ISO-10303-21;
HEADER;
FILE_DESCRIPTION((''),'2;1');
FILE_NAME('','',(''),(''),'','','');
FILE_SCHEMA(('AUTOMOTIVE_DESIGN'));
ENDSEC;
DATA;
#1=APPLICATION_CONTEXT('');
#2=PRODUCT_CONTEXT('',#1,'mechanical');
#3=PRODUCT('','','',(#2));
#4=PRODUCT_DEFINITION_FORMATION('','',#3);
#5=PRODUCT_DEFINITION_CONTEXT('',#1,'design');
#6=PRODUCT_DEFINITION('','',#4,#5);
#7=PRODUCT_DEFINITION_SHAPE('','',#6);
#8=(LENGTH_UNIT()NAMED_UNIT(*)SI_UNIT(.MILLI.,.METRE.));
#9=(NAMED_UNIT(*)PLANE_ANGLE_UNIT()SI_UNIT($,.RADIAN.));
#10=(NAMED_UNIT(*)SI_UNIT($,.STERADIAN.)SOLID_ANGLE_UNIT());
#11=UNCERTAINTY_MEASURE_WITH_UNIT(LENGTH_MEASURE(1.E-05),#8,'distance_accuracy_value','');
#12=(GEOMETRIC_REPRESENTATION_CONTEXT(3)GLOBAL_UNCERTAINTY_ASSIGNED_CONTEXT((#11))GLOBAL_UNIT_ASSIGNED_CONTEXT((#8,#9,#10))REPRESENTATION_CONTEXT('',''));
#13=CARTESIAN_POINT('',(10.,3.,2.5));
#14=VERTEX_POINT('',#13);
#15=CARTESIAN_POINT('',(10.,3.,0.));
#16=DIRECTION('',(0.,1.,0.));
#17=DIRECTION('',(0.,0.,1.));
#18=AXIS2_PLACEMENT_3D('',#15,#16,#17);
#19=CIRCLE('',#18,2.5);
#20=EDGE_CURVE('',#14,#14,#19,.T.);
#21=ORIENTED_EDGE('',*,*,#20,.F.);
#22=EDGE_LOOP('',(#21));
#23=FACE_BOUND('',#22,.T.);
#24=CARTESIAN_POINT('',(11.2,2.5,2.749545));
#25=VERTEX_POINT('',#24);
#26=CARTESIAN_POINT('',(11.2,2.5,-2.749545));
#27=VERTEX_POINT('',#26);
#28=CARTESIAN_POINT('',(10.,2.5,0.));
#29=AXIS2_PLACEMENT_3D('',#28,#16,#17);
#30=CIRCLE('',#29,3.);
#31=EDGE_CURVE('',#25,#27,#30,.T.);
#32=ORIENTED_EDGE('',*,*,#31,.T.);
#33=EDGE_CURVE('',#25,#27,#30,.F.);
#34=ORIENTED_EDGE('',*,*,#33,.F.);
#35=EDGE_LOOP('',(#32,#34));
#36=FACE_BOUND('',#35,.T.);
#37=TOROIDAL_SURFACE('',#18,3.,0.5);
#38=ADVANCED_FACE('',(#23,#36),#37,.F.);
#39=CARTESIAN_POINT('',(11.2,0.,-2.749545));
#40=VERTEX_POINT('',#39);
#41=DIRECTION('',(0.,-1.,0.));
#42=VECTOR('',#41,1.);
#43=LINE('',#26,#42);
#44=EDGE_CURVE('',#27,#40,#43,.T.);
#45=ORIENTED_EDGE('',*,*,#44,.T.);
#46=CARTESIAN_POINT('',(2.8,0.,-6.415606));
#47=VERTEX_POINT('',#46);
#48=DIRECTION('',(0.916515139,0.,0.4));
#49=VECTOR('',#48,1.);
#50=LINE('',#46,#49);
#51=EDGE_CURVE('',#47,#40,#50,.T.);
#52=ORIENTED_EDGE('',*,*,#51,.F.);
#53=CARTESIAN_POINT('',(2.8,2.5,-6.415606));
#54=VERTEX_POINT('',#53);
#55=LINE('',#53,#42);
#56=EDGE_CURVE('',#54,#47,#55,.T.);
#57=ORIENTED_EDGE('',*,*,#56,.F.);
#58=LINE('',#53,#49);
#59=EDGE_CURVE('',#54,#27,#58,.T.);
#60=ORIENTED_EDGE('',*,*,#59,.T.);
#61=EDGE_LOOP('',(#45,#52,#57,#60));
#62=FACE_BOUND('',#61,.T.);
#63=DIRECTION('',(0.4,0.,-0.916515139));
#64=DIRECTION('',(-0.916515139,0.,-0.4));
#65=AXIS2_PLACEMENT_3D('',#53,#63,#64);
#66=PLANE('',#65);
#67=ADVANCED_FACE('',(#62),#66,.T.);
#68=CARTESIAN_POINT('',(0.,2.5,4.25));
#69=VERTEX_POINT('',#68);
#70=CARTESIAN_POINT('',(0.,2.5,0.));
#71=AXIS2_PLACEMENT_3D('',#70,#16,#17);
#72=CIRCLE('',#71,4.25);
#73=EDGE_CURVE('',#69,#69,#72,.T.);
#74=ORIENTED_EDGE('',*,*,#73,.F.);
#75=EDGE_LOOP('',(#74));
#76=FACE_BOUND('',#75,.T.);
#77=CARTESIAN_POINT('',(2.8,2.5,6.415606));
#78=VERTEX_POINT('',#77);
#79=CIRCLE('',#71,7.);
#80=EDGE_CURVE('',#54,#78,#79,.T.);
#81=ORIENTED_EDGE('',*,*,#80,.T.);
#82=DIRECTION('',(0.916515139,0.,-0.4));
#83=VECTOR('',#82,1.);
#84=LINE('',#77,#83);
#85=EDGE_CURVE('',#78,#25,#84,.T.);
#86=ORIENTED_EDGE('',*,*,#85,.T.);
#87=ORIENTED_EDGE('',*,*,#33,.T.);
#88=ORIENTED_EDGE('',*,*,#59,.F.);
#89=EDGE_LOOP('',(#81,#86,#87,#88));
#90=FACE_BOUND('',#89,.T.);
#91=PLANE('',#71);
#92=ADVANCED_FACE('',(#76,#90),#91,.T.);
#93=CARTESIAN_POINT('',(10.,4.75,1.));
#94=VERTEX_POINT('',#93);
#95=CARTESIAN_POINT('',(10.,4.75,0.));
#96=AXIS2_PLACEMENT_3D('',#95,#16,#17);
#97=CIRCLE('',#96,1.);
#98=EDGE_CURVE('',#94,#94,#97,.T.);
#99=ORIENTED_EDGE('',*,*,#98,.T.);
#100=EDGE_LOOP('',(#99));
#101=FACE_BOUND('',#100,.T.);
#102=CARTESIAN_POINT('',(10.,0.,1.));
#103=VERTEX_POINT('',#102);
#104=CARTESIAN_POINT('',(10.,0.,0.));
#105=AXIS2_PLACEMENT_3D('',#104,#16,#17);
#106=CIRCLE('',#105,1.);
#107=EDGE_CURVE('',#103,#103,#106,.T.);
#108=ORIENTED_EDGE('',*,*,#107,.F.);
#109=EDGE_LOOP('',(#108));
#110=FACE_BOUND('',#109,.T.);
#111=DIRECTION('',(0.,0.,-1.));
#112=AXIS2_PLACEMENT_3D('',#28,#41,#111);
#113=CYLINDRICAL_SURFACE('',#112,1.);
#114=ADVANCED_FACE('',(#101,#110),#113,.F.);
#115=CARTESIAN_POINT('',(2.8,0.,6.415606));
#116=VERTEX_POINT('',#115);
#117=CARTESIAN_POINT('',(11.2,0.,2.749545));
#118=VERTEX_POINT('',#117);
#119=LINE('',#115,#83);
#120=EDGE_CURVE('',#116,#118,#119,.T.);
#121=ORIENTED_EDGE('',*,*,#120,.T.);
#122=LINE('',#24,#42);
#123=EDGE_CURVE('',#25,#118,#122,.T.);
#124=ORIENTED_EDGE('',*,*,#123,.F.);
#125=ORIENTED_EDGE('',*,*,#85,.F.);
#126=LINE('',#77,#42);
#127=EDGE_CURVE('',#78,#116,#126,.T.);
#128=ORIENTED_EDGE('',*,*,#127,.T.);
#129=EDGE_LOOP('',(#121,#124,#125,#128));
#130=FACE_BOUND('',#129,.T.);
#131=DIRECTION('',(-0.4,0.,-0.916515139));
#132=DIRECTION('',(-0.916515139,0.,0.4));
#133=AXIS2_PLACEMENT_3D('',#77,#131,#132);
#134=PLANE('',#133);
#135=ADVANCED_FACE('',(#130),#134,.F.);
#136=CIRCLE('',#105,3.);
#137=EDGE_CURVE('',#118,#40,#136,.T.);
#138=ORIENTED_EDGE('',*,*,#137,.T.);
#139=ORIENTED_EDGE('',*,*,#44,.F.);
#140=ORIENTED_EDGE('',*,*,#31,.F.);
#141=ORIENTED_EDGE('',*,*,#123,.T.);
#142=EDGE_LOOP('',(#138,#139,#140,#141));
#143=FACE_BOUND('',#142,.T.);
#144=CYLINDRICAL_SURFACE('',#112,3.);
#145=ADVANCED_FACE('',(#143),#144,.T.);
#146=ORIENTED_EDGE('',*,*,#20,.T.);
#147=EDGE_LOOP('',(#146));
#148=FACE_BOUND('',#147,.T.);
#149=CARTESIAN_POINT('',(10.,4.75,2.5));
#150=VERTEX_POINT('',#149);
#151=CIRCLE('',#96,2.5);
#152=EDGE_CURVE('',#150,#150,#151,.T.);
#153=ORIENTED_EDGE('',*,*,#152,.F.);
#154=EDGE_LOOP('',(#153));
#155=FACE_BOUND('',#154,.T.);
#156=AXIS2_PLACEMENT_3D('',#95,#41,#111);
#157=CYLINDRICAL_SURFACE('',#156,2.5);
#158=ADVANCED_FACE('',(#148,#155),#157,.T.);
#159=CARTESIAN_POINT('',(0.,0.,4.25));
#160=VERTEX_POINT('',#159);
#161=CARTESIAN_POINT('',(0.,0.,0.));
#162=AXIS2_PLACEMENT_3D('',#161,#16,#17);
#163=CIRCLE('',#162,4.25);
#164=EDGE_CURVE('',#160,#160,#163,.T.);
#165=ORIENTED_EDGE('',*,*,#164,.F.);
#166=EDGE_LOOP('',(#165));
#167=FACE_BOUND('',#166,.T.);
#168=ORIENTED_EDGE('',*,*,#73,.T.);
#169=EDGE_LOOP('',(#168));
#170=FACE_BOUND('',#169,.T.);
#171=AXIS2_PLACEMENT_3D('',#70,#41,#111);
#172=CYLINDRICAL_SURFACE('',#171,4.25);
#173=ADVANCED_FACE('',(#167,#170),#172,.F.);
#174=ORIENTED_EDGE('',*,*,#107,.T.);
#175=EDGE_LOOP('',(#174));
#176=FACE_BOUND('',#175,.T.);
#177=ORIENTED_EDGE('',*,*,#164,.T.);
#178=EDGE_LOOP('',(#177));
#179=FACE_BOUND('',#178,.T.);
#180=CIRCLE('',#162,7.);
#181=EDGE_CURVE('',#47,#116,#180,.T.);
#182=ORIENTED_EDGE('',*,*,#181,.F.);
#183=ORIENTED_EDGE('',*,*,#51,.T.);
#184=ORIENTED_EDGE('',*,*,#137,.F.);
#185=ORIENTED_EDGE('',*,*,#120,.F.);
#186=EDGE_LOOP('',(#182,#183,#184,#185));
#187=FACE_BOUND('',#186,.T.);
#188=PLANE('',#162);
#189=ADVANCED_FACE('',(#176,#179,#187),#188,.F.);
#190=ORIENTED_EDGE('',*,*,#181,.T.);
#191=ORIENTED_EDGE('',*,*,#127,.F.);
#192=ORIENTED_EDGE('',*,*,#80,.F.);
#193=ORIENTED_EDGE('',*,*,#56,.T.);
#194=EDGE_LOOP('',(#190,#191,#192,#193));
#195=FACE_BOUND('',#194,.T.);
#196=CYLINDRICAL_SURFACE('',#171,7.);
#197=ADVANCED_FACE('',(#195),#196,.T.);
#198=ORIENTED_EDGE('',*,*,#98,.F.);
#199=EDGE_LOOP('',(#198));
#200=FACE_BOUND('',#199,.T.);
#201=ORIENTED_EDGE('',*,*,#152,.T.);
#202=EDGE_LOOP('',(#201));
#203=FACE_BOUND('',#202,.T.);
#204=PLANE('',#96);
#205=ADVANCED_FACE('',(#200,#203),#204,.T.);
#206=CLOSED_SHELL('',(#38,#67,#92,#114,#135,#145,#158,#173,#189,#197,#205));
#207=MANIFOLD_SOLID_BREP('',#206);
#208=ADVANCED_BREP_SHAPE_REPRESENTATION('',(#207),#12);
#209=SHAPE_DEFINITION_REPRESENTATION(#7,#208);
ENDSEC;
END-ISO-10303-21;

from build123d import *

# Parameters (mm, degrees)
SKETCH_1_R      = 7
SKETCH_1_R_2    = 4.2499999999999964
SKETCH_1_R_3    = 0.9999999999999998
EXTRUDE_1_DEPTH = 2.5
SKETCH_2_R      = 2.5000000000000004
SKETCH_2_R_2    = 0.9999999999999998
EXTRUDE_2_DEPTH = 2.25


with BuildPart() as part:
    # 草图1 → 凸台-拉伸1 (new body)
    # profile 1 of 2: a face of its own
    with BuildSketch(Plane(origin=(0, 0, 0), x_dir=(1, 0, 0), z_dir=(0, 1, 0))):
        Circle(SKETCH_1_R)
        with Locations(Location((0, 0, 0), (0, 0, 270))):
            Circle(SKETCH_1_R_2, mode=Mode.SUBTRACT)
    # profile 2 of 2: a face of its own
    with BuildSketch(Plane(origin=(0, 0, 0), x_dir=(1, 0, 0), z_dir=(0, 1, 0))):
        with BuildLine():
            Line((11.2, 2.749545416973503), (2.8000000000000003, 6.415605972938175))
            ThreePointArc((2.8000000000000007, 6.415605972938176), (5.856620185738529, 3.8340579025361627), (7, 0))
            ThreePointArc((7, -1.71e-15), (5.856620185738526, -3.834057902536167), (2.799999999999998, -6.4156059729381765))
            Line((2.8000000000000007, -6.415605972938176), (11.2, -2.749545416973503))
            ThreePointArc((11.2, -2.749545416973503), (13, 0), (11.2, 2.7495454169735036))
        make_face()
        with Locations(Location((10, 0, 0), (0, 0, 270))):
            Circle(SKETCH_1_R_3, mode=Mode.SUBTRACT)
    extrude(amount=EXTRUDE_1_DEPTH)

    # 草图2 → 凸台-拉伸2 (add)
    with BuildSketch(Plane(origin=(0, 2.5, 0), x_dir=(1, 0, 0), z_dir=(0, 1, 0))):
        with Locations(Location((10, 0, 0), (0, 0, 270))):
            Circle(SKETCH_2_R)
        with Locations(Location((10, 0, 0), (0, 0, 270))):
            Circle(SKETCH_2_R_2, mode=Mode.SUBTRACT)
    extrude(amount=EXTRUDE_2_DEPTH)

    # 圆角2: read off the stored shape, not the designer's step
    # 圆角2 outline → 圆角2 (revolve)
    with BuildSketch(Plane(origin=(10, 0, 0), x_dir=(1, 0, 0), z_dir=(0, 0, 1))):
        with BuildLine():
            ThreePointArc((3, 2.5), (2.646446609, 2.646446609), (2.5, 3))
            Line((2.5, 3), (2.5, 2.5))
            Line((2.5, 2.5), (3, 2.5))
        make_face()
    revolve(axis=Axis((10, 0, 0), (0, 1, 0)))


solid = part.part
